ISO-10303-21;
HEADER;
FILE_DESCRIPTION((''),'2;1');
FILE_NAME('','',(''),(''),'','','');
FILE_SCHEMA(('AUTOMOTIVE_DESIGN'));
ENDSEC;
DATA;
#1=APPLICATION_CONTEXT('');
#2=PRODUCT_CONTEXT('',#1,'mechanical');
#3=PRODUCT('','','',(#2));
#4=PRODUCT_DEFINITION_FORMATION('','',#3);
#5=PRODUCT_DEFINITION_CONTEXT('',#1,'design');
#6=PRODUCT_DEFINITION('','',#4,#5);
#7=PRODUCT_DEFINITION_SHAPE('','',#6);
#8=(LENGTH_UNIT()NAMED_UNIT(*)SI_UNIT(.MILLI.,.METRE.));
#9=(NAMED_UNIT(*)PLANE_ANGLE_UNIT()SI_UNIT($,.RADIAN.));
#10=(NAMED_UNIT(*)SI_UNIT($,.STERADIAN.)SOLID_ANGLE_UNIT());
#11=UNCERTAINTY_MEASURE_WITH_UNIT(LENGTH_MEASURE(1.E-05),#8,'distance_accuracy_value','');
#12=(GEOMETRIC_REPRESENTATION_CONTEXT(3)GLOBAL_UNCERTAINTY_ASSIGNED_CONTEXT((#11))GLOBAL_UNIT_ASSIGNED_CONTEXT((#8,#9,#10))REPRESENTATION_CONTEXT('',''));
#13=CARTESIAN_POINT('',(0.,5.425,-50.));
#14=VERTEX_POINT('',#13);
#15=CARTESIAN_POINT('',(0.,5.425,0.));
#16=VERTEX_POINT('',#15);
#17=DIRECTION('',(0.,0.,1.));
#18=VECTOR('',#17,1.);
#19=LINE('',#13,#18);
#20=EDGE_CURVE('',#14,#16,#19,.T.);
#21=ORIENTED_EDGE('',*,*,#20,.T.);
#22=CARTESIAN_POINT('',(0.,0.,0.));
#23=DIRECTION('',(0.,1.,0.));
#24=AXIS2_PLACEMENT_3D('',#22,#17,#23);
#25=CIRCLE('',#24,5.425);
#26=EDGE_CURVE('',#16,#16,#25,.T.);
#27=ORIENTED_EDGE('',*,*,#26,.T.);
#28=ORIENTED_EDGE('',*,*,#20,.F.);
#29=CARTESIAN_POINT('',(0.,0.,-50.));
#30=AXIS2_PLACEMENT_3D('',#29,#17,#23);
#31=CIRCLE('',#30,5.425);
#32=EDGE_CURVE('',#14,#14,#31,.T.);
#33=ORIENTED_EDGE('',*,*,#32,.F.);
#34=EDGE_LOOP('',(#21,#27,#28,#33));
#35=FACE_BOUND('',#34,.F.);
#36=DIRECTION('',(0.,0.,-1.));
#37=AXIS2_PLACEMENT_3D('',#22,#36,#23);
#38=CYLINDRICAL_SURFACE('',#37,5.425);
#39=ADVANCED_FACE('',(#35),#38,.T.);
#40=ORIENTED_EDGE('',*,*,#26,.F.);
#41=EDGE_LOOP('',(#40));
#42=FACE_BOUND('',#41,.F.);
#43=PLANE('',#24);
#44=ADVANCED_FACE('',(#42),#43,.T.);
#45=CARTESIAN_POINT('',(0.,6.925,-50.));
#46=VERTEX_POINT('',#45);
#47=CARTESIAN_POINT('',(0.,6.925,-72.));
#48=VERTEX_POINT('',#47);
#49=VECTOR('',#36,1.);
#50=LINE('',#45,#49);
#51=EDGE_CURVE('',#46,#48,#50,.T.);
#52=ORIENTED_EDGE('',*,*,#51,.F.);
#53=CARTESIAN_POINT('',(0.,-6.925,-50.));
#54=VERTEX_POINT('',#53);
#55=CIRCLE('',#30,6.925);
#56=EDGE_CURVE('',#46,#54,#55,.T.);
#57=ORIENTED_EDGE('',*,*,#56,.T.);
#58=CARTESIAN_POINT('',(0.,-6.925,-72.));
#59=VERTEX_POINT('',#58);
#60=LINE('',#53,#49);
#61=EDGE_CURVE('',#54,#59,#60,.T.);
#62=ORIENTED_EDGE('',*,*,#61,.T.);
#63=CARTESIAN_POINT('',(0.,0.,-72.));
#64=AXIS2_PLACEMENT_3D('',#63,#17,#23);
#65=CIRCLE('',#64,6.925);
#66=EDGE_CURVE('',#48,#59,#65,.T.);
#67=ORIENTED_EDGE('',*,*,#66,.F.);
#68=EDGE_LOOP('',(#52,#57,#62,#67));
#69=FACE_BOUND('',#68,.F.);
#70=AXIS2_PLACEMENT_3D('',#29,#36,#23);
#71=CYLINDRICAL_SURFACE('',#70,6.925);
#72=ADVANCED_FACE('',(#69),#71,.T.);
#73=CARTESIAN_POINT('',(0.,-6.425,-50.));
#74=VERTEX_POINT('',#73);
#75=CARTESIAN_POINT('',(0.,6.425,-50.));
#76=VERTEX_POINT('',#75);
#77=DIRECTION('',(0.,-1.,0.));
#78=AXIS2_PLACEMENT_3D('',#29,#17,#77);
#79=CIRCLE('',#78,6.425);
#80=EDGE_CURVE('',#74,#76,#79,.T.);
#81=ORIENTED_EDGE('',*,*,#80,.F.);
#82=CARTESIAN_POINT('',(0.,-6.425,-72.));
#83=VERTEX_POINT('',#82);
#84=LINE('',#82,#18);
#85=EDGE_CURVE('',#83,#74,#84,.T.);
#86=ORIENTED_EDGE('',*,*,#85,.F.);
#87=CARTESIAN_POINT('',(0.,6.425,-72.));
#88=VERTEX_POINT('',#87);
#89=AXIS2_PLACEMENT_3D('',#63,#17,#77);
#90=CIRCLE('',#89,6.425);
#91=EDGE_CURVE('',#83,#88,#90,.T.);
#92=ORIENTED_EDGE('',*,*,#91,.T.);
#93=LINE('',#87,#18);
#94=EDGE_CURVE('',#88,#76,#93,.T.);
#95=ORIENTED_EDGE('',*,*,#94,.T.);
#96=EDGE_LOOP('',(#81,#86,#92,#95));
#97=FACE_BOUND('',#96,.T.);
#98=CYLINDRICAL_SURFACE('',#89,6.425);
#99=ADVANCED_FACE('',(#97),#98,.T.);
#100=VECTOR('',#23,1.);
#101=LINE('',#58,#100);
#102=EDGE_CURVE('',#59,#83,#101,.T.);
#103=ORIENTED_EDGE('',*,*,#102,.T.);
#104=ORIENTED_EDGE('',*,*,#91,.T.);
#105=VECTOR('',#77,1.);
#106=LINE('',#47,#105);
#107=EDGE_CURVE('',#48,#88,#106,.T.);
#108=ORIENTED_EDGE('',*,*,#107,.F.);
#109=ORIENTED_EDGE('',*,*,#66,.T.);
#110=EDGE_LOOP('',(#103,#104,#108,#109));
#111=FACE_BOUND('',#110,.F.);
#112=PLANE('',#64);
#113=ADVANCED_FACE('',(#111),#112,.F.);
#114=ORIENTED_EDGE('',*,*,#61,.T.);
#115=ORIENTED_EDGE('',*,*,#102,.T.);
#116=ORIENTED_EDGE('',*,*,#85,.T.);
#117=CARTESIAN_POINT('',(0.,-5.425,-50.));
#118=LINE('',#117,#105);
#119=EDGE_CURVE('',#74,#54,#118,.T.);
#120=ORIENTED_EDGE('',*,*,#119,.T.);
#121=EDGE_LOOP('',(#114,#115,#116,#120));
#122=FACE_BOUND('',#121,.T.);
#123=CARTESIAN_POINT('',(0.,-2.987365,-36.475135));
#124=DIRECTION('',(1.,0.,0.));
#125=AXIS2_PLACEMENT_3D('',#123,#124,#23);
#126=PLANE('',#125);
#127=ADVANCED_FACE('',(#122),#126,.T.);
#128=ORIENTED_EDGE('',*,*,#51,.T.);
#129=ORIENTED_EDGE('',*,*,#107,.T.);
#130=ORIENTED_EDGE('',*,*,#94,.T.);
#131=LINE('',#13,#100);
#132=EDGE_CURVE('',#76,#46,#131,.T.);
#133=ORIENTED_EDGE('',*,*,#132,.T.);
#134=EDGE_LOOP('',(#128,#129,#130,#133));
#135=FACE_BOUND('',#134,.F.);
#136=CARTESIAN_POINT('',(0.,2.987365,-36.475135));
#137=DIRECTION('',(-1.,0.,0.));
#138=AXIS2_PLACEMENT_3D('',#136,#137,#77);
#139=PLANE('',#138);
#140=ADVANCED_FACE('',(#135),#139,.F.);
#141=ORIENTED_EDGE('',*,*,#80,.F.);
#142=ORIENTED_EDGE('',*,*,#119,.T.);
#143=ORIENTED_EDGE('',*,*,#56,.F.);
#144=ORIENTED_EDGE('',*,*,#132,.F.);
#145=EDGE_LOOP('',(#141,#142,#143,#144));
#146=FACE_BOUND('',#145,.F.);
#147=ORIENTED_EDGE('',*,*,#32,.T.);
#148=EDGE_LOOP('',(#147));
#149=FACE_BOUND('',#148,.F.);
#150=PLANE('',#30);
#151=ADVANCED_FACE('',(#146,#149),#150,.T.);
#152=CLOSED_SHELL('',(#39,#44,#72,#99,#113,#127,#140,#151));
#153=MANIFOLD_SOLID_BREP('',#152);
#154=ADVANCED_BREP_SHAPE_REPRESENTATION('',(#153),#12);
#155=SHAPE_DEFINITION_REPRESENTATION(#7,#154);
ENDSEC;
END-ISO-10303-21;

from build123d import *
from build123d import SkipClean  # not in build123d's __all__

# Parameters (mm, degrees)
F1_ANGLE_BACK = 90
F1_ANGLE      = 180
F3_ANGLE_BACK = 90
F3_ANGLE      = 180


with BuildPart() as f1:
    # F0 (on Front) → F1 (revolve)
    with BuildSketch(Plane.XZ, mode=Mode.PRIVATE) as f1_sk:
        Polygon((5.425, 0), (0, 0), (0, -72), (6.425, -72), (6.425, -50), (5.425, -50), align=None)
    revolve(f1_sk.sketch.rotate(Axis((0, 0, -36), (0, 0, 1)), -F1_ANGLE_BACK), axis=Axis((0, 0, -36), (0, 0, 1)), revolution_arc=F1_ANGLE)

    # F2 (on Front) → F3 (revolve)
    with BuildSketch(Plane.XZ, mode=Mode.PRIVATE) as f3_sk:
        Polygon((0, -72), (0, 0), (-5.425, 0), (-5.425, -50), (-6.925, -50), (-6.925, -72), align=None)
    revolve(f3_sk.sketch.rotate(Axis((0, 0, -36), (0, 0, 1)), -F3_ANGLE_BACK), axis=Axis((0, 0, -36), (0, 0, 1)), revolution_arc=F3_ANGLE)


solid = f1.part
